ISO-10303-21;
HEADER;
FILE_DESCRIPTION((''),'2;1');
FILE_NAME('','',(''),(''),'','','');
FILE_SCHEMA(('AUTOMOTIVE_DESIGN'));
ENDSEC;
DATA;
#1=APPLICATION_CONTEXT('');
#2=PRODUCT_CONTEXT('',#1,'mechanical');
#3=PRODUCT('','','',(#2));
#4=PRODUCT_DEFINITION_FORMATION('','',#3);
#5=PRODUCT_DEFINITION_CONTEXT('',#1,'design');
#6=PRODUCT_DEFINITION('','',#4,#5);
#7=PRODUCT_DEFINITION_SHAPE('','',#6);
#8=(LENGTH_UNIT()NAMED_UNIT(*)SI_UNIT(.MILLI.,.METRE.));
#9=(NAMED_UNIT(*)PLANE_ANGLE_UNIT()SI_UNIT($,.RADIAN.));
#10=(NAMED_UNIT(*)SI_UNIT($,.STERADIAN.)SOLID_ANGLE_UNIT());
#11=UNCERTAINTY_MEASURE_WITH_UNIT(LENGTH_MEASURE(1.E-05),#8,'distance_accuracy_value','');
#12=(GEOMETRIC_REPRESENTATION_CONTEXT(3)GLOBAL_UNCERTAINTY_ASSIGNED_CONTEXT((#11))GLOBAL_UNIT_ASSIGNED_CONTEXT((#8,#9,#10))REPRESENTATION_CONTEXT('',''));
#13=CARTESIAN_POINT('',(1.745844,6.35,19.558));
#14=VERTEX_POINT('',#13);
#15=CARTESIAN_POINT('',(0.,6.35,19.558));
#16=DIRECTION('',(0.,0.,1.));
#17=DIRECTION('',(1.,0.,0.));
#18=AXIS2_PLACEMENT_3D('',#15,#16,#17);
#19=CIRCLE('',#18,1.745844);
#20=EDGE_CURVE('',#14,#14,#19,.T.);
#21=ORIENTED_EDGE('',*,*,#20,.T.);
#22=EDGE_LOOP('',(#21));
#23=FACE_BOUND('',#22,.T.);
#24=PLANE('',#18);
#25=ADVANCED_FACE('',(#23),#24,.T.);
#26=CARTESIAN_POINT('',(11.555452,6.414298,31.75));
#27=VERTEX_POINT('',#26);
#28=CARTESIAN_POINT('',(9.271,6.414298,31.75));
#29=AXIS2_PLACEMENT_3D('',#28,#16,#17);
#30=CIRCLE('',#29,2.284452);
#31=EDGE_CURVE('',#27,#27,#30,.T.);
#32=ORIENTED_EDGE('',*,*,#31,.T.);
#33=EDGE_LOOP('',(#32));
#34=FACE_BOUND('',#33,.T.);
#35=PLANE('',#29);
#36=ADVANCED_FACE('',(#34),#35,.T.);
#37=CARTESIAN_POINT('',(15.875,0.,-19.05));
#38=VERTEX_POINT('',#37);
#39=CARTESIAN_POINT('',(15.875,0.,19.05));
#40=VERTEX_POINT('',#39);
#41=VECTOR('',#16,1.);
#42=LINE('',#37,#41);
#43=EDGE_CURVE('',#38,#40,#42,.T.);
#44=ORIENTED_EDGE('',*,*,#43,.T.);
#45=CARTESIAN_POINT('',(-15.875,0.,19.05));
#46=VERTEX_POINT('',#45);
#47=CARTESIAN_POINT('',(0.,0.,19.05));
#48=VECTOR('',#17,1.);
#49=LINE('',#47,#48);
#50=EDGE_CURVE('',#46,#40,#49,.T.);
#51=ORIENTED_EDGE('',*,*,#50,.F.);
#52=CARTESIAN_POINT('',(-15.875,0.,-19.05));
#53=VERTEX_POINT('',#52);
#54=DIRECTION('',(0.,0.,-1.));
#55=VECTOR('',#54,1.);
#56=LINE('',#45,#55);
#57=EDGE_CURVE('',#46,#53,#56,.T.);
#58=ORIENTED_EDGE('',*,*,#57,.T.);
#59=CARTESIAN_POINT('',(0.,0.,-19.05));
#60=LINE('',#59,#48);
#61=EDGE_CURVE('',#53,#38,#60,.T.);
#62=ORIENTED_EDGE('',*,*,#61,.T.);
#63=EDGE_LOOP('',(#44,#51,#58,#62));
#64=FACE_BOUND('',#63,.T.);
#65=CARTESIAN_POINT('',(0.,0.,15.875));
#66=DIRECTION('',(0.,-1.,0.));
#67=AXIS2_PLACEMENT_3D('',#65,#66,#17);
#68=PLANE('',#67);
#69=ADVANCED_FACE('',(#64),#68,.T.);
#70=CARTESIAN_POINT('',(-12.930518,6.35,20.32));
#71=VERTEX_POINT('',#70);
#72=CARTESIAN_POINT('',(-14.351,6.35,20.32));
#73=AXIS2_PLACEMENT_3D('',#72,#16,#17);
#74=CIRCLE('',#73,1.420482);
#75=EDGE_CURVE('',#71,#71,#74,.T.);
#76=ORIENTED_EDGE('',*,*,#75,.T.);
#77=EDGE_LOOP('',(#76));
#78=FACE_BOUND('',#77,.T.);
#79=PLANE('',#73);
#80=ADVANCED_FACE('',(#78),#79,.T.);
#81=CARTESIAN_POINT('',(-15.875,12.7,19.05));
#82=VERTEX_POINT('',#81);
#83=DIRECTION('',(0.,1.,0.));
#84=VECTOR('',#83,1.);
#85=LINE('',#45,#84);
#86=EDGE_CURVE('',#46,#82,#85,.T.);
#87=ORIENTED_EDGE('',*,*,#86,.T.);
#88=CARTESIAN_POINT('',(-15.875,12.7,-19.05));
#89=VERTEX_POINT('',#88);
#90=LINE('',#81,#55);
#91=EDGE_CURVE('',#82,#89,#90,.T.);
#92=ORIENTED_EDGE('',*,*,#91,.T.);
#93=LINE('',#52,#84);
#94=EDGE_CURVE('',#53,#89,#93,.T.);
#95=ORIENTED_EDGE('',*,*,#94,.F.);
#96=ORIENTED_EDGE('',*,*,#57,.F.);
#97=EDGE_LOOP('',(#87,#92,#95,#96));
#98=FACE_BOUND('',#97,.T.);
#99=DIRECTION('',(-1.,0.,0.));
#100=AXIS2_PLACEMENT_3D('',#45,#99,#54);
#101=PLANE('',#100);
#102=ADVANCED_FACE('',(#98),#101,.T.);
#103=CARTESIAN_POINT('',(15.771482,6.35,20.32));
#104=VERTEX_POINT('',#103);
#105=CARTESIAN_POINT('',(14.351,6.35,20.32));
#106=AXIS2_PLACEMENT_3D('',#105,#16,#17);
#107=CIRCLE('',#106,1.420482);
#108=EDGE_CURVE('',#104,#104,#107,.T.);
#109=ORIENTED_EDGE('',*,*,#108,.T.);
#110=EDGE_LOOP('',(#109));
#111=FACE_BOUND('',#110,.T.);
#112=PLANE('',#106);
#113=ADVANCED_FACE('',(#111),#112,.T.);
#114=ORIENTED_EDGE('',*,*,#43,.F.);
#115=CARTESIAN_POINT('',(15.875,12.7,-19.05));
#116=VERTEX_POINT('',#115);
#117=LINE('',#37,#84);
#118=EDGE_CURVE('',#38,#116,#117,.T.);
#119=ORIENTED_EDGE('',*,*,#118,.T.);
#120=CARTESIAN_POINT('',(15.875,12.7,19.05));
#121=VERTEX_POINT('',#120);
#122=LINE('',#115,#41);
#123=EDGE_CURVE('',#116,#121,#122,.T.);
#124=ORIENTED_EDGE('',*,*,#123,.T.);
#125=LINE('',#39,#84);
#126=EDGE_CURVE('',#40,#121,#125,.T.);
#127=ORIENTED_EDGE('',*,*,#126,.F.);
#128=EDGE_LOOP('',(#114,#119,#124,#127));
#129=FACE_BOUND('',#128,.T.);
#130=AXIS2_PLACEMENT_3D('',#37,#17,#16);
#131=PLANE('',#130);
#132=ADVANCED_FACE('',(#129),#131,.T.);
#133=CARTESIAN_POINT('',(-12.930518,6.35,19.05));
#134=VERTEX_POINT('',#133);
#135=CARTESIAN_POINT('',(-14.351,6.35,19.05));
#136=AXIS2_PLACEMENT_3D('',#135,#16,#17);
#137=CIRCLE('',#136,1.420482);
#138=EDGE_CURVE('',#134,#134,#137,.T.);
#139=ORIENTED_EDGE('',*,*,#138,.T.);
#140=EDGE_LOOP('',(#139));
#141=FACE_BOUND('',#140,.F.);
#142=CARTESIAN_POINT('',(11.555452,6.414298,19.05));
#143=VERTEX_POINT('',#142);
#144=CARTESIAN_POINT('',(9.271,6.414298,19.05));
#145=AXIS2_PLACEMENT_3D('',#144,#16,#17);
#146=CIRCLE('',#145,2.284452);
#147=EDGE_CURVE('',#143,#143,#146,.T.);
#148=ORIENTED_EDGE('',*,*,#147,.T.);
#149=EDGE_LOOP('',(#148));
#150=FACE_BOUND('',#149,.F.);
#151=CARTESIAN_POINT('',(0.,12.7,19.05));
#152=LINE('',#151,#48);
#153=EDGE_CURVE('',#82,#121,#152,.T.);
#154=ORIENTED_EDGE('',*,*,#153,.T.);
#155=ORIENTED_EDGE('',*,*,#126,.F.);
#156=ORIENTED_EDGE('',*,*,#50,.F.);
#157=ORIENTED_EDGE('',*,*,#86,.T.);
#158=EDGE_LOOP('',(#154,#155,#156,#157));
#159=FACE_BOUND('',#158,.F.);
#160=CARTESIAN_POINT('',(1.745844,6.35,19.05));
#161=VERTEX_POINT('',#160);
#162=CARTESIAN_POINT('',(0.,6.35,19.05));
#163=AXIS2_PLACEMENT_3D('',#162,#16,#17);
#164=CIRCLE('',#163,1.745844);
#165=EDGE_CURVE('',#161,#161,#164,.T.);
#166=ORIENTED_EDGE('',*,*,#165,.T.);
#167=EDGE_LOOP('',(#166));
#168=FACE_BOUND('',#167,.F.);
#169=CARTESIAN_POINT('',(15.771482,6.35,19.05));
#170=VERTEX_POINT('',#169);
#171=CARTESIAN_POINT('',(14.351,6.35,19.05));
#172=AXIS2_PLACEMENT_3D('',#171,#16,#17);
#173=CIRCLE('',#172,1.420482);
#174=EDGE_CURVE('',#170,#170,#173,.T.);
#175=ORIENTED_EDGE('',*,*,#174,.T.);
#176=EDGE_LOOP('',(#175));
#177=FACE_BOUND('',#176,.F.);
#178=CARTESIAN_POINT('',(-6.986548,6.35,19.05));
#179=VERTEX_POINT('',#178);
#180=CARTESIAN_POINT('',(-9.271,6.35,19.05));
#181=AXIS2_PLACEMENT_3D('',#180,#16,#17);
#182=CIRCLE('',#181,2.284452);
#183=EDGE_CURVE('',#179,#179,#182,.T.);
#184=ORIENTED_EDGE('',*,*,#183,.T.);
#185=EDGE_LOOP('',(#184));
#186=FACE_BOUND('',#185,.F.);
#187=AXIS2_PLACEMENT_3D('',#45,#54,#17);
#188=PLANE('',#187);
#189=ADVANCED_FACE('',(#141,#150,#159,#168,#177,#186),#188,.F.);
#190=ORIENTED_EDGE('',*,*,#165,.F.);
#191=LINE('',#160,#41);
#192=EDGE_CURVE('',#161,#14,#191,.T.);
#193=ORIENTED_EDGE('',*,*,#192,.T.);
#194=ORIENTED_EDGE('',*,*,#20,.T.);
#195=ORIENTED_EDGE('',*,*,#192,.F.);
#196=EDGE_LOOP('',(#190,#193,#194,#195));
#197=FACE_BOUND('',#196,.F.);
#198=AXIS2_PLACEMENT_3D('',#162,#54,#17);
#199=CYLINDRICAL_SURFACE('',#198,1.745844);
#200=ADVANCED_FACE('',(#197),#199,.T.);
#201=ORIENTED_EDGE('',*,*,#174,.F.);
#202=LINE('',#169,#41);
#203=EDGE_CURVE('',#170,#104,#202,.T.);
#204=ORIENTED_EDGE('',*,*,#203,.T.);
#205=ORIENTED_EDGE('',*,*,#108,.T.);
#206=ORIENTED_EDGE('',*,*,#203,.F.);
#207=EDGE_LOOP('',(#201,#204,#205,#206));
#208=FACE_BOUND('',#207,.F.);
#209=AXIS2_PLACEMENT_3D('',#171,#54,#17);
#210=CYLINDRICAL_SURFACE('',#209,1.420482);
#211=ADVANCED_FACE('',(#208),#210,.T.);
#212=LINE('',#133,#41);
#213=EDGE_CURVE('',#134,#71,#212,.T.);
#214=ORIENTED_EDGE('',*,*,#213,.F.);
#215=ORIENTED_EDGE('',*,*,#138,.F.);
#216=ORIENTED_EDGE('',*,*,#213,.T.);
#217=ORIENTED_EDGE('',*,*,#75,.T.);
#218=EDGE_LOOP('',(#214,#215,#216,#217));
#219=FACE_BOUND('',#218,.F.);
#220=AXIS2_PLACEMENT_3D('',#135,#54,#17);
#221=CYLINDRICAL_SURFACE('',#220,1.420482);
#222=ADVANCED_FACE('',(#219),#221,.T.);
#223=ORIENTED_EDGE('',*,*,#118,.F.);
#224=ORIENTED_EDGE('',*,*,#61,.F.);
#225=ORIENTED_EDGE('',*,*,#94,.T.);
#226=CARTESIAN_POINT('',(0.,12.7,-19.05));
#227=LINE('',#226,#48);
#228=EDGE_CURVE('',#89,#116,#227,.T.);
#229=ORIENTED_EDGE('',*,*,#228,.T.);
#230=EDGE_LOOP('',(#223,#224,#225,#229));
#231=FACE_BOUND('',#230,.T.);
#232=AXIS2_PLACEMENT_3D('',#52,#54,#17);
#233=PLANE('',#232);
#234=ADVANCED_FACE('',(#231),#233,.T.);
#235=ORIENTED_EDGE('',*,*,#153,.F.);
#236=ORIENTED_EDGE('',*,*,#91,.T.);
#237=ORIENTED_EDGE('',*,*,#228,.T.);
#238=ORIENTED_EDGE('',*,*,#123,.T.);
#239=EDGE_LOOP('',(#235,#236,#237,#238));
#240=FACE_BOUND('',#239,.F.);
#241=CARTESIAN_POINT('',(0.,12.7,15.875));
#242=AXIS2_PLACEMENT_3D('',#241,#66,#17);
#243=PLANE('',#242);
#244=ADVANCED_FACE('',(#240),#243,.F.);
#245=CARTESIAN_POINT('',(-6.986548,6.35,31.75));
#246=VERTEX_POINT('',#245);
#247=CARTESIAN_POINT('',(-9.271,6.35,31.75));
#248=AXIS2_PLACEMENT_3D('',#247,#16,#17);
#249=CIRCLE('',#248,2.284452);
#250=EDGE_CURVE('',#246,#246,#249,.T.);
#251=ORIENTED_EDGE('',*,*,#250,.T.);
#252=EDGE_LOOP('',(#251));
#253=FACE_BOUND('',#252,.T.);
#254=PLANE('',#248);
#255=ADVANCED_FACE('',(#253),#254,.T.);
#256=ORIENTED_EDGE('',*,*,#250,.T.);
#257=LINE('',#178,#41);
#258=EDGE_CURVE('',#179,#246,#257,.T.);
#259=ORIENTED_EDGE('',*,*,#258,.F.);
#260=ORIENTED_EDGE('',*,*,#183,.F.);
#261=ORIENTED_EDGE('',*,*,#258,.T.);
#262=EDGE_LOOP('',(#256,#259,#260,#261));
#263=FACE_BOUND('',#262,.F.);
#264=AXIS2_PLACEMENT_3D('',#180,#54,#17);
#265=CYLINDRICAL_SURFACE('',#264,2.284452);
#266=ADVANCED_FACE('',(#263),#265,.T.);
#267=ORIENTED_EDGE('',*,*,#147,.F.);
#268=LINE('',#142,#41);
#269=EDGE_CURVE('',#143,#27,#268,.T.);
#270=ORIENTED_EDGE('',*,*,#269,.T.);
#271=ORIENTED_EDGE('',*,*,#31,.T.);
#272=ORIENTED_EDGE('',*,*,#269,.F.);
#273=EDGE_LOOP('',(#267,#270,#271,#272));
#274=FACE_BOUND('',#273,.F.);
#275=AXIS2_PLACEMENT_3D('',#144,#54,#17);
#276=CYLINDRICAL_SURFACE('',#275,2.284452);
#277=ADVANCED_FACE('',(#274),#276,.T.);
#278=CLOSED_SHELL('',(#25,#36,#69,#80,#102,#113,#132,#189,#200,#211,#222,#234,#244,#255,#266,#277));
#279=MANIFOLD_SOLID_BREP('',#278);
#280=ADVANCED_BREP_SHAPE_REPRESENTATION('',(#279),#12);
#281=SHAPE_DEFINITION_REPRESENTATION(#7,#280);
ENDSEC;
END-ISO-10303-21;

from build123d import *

# Parameters (mm, degrees)
F0_W     = 31.75
F0_H     = 6.35
F1_DEPTH = 12.7
F2_R     = 1.4204821808
F3_DEPTH = 1.27
F2_R_2   = 1.7458442661
F4_DEPTH = 0.508
F2_R_3   = 2.2844516469
F6_DEPTH = 12.7


# Not quite as in the source:
# - the program builds the solid bodies; features that only make, move or delete a surface that nothing else refers to are left out


with BuildPart() as f1:
    # F0 (on Front) → F1 (new body)
    with BuildSketch(Plane.XZ):
        with Locations((0, 15.875)):
            Rectangle(F0_W, F0_H)
        with Locations((0, 9.525)):
            Rectangle(F0_W, F0_H)
        with Locations((0, 3.175)):
            Rectangle(F0_W, F0_H)
        with Locations((0, -3.175)):
            Rectangle(F0_W, F0_H)
        with Locations((0, -9.525)):
            Rectangle(F0_W, F0_H)
        with Locations((0, -15.875)):
            Rectangle(F0_W, F0_H)
    extrude(amount=-F1_DEPTH)

    # F2 (on face) → F3 (join)
    with BuildSketch(Plane.XY.offset(19.05)):
        with Locations((-14.351, 6.35)):
            Circle(F2_R)
        with Locations((14.351, 6.35)):
            Circle(F2_R)
    extrude(amount=F3_DEPTH)

    # F2 (on face) → F4 (join)
    with BuildSketch(Plane.XY.offset(19.05)):
        with Locations((0, 6.35)):
            Circle(F2_R_2)
    extrude(amount=F4_DEPTH)

    # F2 (on face) → F6 (join)
    with BuildSketch(Plane.XY.offset(19.05)):
        with Locations((-9.271, 6.35)):
            Circle(F2_R_3)
        with Locations((9.271, 6.4142975025)):
            Circle(F2_R_3)
    extrude(amount=F6_DEPTH)


solid = f1.part
